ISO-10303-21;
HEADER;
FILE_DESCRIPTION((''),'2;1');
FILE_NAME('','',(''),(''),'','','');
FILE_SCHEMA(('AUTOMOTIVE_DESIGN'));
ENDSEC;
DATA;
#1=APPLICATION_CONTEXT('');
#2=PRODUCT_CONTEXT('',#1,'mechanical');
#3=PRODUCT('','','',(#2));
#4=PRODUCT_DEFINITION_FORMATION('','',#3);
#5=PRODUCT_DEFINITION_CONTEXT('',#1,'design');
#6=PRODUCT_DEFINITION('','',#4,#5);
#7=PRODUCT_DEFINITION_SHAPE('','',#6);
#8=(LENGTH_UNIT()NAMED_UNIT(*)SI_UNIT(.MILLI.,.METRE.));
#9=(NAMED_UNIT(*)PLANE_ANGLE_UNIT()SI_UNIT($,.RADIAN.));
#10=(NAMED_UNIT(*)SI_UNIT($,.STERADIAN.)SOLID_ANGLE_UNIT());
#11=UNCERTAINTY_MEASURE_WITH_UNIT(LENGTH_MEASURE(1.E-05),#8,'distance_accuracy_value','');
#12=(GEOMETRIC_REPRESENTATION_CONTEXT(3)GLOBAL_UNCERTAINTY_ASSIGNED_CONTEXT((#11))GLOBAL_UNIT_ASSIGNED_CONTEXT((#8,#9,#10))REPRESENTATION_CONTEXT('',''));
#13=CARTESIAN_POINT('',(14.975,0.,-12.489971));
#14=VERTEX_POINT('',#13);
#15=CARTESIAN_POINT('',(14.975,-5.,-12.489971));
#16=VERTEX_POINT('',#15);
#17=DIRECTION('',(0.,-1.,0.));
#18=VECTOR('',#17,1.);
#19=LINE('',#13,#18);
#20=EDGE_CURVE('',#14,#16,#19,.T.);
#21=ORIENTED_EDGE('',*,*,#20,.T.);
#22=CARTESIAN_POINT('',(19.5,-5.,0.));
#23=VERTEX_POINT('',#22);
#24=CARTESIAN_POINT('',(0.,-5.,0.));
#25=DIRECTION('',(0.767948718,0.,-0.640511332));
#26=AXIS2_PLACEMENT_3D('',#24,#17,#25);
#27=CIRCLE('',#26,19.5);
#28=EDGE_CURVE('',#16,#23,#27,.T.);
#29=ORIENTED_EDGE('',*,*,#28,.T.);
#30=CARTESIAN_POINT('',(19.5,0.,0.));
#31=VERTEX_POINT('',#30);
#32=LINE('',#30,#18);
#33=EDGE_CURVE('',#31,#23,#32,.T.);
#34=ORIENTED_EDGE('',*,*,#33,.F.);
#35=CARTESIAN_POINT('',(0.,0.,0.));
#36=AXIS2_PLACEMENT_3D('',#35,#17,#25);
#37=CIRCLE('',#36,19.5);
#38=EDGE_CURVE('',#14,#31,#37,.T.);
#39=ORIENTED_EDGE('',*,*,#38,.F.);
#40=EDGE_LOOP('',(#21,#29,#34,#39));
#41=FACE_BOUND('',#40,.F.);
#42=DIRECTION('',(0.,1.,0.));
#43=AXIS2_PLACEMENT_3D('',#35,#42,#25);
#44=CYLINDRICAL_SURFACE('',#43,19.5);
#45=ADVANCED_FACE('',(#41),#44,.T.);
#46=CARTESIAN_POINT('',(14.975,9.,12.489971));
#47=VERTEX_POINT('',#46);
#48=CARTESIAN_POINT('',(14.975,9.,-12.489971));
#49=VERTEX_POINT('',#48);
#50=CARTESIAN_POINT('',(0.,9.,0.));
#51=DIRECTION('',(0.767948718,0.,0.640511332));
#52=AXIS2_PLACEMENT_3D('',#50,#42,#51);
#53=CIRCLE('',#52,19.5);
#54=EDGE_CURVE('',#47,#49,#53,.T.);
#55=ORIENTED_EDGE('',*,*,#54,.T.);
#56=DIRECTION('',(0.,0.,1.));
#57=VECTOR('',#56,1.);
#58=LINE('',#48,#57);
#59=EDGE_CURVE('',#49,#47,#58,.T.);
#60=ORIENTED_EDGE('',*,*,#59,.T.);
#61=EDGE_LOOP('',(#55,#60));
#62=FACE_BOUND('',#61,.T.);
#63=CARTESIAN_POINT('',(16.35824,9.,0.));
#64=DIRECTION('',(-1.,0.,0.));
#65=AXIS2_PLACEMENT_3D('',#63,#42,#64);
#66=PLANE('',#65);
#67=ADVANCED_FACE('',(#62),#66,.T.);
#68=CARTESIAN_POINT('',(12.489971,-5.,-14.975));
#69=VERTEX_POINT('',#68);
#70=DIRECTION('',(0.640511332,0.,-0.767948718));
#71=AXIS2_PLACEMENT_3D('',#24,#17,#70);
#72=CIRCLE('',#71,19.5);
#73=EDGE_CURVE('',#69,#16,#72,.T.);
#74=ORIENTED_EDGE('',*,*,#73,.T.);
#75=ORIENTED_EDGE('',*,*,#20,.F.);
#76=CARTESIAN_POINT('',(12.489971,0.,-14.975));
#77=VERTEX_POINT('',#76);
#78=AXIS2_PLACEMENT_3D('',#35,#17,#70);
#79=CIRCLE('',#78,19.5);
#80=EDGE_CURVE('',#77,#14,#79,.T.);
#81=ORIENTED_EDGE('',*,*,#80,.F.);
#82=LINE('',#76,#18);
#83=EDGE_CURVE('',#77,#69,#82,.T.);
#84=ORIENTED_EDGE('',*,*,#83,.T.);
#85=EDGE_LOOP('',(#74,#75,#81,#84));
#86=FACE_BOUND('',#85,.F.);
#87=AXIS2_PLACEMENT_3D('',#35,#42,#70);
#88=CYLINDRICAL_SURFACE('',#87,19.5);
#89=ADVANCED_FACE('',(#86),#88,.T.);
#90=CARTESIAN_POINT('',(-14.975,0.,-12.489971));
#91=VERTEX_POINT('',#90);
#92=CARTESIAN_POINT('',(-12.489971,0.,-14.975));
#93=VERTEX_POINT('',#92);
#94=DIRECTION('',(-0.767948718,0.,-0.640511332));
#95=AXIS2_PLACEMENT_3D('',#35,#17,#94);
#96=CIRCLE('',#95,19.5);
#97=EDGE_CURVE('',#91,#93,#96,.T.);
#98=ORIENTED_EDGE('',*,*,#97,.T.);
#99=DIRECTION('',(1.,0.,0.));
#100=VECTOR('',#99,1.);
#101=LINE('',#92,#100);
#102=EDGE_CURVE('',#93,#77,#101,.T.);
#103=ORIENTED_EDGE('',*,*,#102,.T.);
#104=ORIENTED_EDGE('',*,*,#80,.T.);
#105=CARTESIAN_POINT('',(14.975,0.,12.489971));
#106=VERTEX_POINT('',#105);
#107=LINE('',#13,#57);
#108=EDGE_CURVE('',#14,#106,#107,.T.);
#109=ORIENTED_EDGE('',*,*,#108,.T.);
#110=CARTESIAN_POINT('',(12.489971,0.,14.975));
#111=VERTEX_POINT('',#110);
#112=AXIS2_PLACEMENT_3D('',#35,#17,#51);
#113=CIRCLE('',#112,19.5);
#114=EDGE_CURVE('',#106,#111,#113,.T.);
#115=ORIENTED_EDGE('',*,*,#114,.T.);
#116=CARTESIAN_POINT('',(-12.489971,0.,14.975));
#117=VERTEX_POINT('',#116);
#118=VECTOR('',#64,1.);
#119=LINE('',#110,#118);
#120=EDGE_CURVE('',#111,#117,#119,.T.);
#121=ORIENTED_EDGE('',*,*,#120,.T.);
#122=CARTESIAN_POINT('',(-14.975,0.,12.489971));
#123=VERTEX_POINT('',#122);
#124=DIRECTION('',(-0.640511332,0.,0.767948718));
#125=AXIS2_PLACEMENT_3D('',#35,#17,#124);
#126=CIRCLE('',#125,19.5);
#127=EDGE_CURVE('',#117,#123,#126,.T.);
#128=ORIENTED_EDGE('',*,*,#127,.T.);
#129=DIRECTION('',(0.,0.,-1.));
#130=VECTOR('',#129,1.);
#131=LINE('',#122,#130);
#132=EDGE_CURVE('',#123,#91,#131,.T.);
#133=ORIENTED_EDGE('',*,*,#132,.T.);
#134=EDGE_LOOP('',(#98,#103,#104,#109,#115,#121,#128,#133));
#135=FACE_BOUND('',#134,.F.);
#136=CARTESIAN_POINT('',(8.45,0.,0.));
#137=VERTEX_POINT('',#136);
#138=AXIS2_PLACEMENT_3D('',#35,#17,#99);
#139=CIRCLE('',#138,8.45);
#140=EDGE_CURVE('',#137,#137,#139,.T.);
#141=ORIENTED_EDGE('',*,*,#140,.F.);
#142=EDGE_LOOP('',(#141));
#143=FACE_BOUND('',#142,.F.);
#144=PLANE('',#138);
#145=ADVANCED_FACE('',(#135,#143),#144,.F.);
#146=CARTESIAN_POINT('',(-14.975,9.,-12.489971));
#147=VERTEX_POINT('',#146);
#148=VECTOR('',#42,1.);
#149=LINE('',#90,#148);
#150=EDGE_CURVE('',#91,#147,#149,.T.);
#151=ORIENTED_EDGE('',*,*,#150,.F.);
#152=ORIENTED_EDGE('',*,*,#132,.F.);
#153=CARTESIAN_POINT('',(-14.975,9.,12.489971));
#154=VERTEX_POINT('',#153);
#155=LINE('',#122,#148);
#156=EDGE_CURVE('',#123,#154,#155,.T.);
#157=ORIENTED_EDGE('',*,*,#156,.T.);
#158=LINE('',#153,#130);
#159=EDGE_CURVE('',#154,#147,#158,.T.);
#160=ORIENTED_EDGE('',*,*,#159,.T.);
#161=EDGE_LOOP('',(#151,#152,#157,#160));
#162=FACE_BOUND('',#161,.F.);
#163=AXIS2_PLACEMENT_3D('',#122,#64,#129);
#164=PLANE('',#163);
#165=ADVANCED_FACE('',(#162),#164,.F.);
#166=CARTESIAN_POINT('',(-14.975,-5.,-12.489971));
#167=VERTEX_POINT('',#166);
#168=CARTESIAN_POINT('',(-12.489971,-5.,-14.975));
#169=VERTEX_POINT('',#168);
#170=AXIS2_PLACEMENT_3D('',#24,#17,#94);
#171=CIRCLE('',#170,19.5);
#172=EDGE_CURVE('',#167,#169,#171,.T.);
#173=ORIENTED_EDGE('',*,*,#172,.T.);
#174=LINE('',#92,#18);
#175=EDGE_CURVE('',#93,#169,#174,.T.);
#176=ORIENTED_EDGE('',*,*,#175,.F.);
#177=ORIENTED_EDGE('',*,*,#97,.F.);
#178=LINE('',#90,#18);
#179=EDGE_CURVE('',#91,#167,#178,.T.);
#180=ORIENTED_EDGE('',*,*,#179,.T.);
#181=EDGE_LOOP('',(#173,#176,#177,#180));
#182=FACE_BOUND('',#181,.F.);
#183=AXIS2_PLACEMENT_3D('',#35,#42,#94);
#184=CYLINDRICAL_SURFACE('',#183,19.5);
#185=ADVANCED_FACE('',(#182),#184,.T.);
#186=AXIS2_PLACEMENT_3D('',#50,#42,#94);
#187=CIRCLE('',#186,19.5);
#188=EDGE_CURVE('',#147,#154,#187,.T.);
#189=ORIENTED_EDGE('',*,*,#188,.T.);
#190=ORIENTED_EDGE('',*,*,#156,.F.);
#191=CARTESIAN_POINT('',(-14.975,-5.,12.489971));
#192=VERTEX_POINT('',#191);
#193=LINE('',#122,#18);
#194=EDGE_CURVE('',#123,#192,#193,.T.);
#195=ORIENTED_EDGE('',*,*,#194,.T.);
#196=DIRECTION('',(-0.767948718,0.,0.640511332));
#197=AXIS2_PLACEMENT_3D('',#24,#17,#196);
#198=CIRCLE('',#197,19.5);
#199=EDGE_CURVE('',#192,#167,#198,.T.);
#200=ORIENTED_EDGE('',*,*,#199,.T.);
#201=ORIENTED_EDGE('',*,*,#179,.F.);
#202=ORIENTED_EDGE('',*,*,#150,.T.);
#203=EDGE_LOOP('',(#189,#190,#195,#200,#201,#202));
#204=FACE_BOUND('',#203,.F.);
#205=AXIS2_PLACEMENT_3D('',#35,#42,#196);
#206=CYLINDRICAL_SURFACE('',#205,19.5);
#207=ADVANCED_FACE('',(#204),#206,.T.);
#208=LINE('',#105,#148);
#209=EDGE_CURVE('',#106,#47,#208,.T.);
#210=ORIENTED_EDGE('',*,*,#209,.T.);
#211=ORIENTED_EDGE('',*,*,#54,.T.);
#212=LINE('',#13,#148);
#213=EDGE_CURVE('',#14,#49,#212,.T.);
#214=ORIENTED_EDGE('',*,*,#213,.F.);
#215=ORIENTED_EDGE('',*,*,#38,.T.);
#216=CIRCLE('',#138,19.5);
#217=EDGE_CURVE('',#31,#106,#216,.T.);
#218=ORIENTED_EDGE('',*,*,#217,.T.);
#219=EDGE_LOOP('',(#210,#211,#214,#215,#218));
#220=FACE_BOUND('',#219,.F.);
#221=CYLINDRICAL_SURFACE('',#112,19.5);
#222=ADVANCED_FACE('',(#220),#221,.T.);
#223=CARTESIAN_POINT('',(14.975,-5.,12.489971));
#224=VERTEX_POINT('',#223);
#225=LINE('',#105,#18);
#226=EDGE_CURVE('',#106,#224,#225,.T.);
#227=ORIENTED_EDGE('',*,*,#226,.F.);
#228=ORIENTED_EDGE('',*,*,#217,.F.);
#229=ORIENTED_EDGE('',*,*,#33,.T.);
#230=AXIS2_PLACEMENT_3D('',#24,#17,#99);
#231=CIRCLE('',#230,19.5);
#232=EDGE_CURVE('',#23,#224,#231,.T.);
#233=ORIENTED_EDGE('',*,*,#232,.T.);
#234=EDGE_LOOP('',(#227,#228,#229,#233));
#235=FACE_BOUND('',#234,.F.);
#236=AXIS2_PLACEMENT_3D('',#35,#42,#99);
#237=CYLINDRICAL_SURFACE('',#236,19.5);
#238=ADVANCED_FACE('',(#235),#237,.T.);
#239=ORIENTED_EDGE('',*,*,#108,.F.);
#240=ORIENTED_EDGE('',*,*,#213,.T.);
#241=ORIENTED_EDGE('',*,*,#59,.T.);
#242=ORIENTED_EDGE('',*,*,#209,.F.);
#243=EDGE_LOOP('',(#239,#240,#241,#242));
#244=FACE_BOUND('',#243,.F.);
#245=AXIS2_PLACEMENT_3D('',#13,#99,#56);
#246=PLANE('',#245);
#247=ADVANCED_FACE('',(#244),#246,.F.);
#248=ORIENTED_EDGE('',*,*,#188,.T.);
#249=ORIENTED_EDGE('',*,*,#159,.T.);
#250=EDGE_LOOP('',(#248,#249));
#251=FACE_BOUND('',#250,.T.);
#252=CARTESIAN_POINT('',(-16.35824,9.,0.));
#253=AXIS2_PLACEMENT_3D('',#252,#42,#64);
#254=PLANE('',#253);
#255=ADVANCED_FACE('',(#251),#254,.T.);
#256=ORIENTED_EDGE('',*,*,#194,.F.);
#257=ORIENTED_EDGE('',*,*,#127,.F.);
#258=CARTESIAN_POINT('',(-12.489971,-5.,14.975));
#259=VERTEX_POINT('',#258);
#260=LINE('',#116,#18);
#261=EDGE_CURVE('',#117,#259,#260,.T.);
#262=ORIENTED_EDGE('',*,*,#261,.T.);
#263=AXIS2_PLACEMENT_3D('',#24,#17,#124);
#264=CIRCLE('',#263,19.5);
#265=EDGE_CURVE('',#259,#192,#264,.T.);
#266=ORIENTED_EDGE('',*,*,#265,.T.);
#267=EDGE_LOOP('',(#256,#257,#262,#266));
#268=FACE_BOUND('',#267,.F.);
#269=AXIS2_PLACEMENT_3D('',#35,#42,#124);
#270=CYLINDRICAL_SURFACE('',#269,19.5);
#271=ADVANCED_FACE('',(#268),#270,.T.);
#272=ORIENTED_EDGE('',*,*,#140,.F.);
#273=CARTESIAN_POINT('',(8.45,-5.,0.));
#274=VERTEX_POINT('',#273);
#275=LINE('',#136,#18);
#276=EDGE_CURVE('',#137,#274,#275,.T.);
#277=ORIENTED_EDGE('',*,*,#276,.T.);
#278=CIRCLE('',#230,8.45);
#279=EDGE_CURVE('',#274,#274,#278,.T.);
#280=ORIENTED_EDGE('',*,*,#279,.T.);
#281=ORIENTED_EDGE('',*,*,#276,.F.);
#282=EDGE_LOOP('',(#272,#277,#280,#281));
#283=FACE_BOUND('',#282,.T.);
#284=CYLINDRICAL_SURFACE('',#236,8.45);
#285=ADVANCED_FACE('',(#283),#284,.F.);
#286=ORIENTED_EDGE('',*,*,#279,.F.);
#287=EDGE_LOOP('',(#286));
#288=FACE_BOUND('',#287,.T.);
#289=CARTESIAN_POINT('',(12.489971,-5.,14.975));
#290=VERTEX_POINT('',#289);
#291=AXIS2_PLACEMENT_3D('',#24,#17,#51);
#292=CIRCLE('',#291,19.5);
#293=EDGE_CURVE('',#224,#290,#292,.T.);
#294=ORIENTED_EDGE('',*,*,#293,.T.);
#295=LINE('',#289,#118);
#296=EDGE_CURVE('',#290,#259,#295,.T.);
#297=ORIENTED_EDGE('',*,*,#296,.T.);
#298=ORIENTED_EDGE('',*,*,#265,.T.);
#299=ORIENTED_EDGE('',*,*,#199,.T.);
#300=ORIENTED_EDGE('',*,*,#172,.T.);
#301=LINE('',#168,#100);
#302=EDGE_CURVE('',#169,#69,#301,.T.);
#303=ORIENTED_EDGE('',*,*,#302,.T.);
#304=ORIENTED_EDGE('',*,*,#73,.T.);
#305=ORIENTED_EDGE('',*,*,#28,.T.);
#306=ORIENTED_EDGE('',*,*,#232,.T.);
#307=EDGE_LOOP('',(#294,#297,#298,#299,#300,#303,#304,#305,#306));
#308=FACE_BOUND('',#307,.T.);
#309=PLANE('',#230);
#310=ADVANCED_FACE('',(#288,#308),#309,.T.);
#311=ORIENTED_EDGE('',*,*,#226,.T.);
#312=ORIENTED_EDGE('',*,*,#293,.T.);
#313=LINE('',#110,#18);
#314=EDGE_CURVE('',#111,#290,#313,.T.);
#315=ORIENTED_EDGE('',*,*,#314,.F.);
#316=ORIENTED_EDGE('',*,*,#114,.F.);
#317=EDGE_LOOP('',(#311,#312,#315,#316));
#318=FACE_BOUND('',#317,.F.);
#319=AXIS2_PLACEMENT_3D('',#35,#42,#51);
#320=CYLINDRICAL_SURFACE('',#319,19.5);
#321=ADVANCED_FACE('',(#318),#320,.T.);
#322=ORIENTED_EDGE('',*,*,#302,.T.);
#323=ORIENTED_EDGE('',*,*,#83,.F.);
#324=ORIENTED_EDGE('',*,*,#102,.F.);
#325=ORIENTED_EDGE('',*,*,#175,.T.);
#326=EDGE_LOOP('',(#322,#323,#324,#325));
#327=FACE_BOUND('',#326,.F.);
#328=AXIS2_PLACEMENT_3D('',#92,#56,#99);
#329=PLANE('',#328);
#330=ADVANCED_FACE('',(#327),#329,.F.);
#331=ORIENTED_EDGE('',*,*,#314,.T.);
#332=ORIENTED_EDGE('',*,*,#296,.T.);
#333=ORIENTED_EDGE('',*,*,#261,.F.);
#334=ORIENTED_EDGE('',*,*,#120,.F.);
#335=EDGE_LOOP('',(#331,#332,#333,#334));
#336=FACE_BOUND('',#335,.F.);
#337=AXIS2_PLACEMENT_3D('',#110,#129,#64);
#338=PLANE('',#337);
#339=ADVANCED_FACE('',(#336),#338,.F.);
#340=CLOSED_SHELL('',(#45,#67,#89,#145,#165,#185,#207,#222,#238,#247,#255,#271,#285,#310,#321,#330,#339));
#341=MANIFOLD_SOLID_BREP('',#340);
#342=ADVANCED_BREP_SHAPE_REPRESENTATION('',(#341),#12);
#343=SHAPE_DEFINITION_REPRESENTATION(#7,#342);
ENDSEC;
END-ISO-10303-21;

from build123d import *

# Parameters (mm, degrees)
F0_R     = 8.45
F1_DEPTH = 5
F3_DEPTH = 5
F5_DEPTH = 9


# Not quite as in the source:
# - after a boolean that leaves OpenCascade's solid faulty, fix() repairs it
# - a feature names something its author has since deleted; it is built from what else it names


with BuildPart() as f1:
    # F0 (on Front) → F1 (new body)
    with BuildSketch(Plane.XZ):
        with BuildLine():
            ThreePointArc((14.975, 12.4899709767), (13.7885822331, 13.7885822331), (12.4899709767, 14.975))
            Line((12.4899709767, 14.975), (-12.4899709767, 14.975))
            ThreePointArc((-12.4899709767, 14.975), (-13.7885822331, 13.7885822331), (-14.975, 12.4899709767))
            Line((-14.975, 12.4899709767), (-14.975, -12.4899709767))
            ThreePointArc((-14.975, -12.4899709767), (-13.7885822331, -13.7885822331), (-12.4899709767, -14.975))
            Line((-12.4899709767, -14.975), (12.4899709767, -14.975))
            ThreePointArc((12.4899709767, -14.975), (13.7885822331, -13.7885822331), (14.975, -12.4899709767))
            Line((14.975, -12.4899709767), (14.975, 12.4899709767))
        make_face()
        Circle(F0_R, mode=Mode.SUBTRACT)
        with BuildLine():
            Line((-12.4899709767, 14.975), (12.4899709767, 14.975))
            ThreePointArc((12.4899709767, 14.975), (0, 19.5), (-12.4899709767, 14.975))
        make_face()
        with BuildLine():
            ThreePointArc((-12.4899709767, -14.975), (0, -19.5), (12.4899709767, -14.975))
            Line((12.4899709767, -14.975), (-12.4899709767, -14.975))
        make_face()
        with BuildLine():
            ThreePointArc((19.5, 0), (18.3338825675, 6.6421946674), (14.975, 12.4899709767))
            Line((14.975, 12.4899709767), (14.975, -12.4899709767))
            ThreePointArc((14.975, -12.4899709767), (18.3338825675, -6.6421946674), (19.5, 0))
        make_face()
        with BuildLine():
            Line((-14.975, -12.4899709767), (-14.975, 12.4899709767))
            ThreePointArc((-14.975, 12.4899709767), (-19.5, 0), (-14.975, -12.4899709767))
        make_face()
    extrude(amount=F1_DEPTH)

    # F2 (on face) → F3 (cut, through all)
    with BuildSketch(Plane(origin=(0, 0, 0), x_dir=(-1, 0, 0), z_dir=(0, 1, 0))):
        with BuildLine():
            ThreePointArc((12.4899709767, 14.975), (0, 19.5), (-12.4899709767, 14.975))
            Line((-12.4899709767, 14.975), (12.4899709767, 14.975))
        make_face()
        with BuildLine():
            Line((12.4899709767, -14.975), (-12.4899709767, -14.975))
            ThreePointArc((-12.4899709767, -14.975), (0, -19.5), (12.4899709767, -14.975))
        make_face()
    extrude(amount=-F3_DEPTH, mode=Mode.SUBTRACT)

    # F4 (on face) → F5 (join)
    with BuildSketch(Plane(origin=(0, 0, 0), x_dir=(-1, 0, 0), z_dir=(0, 1, 0))):
        with BuildLine():
            Line((-14.975, -12.4899709767), (-14.975, 12.4899709767))
            ThreePointArc((-14.975, 12.4899709767), (-19.5, 0), (-14.975, -12.4899709767))
        make_face()
        with BuildLine():
            ThreePointArc((14.975, -12.4899709767), (19.5, 0), (14.975, 12.4899709767))
            Line((14.975, 12.4899709767), (14.975, -12.4899709767))
        make_face()
    extrude(amount=F5_DEPTH)

    add(f1.part.fix(), mode=Mode.REPLACE)


solid = f1.part
